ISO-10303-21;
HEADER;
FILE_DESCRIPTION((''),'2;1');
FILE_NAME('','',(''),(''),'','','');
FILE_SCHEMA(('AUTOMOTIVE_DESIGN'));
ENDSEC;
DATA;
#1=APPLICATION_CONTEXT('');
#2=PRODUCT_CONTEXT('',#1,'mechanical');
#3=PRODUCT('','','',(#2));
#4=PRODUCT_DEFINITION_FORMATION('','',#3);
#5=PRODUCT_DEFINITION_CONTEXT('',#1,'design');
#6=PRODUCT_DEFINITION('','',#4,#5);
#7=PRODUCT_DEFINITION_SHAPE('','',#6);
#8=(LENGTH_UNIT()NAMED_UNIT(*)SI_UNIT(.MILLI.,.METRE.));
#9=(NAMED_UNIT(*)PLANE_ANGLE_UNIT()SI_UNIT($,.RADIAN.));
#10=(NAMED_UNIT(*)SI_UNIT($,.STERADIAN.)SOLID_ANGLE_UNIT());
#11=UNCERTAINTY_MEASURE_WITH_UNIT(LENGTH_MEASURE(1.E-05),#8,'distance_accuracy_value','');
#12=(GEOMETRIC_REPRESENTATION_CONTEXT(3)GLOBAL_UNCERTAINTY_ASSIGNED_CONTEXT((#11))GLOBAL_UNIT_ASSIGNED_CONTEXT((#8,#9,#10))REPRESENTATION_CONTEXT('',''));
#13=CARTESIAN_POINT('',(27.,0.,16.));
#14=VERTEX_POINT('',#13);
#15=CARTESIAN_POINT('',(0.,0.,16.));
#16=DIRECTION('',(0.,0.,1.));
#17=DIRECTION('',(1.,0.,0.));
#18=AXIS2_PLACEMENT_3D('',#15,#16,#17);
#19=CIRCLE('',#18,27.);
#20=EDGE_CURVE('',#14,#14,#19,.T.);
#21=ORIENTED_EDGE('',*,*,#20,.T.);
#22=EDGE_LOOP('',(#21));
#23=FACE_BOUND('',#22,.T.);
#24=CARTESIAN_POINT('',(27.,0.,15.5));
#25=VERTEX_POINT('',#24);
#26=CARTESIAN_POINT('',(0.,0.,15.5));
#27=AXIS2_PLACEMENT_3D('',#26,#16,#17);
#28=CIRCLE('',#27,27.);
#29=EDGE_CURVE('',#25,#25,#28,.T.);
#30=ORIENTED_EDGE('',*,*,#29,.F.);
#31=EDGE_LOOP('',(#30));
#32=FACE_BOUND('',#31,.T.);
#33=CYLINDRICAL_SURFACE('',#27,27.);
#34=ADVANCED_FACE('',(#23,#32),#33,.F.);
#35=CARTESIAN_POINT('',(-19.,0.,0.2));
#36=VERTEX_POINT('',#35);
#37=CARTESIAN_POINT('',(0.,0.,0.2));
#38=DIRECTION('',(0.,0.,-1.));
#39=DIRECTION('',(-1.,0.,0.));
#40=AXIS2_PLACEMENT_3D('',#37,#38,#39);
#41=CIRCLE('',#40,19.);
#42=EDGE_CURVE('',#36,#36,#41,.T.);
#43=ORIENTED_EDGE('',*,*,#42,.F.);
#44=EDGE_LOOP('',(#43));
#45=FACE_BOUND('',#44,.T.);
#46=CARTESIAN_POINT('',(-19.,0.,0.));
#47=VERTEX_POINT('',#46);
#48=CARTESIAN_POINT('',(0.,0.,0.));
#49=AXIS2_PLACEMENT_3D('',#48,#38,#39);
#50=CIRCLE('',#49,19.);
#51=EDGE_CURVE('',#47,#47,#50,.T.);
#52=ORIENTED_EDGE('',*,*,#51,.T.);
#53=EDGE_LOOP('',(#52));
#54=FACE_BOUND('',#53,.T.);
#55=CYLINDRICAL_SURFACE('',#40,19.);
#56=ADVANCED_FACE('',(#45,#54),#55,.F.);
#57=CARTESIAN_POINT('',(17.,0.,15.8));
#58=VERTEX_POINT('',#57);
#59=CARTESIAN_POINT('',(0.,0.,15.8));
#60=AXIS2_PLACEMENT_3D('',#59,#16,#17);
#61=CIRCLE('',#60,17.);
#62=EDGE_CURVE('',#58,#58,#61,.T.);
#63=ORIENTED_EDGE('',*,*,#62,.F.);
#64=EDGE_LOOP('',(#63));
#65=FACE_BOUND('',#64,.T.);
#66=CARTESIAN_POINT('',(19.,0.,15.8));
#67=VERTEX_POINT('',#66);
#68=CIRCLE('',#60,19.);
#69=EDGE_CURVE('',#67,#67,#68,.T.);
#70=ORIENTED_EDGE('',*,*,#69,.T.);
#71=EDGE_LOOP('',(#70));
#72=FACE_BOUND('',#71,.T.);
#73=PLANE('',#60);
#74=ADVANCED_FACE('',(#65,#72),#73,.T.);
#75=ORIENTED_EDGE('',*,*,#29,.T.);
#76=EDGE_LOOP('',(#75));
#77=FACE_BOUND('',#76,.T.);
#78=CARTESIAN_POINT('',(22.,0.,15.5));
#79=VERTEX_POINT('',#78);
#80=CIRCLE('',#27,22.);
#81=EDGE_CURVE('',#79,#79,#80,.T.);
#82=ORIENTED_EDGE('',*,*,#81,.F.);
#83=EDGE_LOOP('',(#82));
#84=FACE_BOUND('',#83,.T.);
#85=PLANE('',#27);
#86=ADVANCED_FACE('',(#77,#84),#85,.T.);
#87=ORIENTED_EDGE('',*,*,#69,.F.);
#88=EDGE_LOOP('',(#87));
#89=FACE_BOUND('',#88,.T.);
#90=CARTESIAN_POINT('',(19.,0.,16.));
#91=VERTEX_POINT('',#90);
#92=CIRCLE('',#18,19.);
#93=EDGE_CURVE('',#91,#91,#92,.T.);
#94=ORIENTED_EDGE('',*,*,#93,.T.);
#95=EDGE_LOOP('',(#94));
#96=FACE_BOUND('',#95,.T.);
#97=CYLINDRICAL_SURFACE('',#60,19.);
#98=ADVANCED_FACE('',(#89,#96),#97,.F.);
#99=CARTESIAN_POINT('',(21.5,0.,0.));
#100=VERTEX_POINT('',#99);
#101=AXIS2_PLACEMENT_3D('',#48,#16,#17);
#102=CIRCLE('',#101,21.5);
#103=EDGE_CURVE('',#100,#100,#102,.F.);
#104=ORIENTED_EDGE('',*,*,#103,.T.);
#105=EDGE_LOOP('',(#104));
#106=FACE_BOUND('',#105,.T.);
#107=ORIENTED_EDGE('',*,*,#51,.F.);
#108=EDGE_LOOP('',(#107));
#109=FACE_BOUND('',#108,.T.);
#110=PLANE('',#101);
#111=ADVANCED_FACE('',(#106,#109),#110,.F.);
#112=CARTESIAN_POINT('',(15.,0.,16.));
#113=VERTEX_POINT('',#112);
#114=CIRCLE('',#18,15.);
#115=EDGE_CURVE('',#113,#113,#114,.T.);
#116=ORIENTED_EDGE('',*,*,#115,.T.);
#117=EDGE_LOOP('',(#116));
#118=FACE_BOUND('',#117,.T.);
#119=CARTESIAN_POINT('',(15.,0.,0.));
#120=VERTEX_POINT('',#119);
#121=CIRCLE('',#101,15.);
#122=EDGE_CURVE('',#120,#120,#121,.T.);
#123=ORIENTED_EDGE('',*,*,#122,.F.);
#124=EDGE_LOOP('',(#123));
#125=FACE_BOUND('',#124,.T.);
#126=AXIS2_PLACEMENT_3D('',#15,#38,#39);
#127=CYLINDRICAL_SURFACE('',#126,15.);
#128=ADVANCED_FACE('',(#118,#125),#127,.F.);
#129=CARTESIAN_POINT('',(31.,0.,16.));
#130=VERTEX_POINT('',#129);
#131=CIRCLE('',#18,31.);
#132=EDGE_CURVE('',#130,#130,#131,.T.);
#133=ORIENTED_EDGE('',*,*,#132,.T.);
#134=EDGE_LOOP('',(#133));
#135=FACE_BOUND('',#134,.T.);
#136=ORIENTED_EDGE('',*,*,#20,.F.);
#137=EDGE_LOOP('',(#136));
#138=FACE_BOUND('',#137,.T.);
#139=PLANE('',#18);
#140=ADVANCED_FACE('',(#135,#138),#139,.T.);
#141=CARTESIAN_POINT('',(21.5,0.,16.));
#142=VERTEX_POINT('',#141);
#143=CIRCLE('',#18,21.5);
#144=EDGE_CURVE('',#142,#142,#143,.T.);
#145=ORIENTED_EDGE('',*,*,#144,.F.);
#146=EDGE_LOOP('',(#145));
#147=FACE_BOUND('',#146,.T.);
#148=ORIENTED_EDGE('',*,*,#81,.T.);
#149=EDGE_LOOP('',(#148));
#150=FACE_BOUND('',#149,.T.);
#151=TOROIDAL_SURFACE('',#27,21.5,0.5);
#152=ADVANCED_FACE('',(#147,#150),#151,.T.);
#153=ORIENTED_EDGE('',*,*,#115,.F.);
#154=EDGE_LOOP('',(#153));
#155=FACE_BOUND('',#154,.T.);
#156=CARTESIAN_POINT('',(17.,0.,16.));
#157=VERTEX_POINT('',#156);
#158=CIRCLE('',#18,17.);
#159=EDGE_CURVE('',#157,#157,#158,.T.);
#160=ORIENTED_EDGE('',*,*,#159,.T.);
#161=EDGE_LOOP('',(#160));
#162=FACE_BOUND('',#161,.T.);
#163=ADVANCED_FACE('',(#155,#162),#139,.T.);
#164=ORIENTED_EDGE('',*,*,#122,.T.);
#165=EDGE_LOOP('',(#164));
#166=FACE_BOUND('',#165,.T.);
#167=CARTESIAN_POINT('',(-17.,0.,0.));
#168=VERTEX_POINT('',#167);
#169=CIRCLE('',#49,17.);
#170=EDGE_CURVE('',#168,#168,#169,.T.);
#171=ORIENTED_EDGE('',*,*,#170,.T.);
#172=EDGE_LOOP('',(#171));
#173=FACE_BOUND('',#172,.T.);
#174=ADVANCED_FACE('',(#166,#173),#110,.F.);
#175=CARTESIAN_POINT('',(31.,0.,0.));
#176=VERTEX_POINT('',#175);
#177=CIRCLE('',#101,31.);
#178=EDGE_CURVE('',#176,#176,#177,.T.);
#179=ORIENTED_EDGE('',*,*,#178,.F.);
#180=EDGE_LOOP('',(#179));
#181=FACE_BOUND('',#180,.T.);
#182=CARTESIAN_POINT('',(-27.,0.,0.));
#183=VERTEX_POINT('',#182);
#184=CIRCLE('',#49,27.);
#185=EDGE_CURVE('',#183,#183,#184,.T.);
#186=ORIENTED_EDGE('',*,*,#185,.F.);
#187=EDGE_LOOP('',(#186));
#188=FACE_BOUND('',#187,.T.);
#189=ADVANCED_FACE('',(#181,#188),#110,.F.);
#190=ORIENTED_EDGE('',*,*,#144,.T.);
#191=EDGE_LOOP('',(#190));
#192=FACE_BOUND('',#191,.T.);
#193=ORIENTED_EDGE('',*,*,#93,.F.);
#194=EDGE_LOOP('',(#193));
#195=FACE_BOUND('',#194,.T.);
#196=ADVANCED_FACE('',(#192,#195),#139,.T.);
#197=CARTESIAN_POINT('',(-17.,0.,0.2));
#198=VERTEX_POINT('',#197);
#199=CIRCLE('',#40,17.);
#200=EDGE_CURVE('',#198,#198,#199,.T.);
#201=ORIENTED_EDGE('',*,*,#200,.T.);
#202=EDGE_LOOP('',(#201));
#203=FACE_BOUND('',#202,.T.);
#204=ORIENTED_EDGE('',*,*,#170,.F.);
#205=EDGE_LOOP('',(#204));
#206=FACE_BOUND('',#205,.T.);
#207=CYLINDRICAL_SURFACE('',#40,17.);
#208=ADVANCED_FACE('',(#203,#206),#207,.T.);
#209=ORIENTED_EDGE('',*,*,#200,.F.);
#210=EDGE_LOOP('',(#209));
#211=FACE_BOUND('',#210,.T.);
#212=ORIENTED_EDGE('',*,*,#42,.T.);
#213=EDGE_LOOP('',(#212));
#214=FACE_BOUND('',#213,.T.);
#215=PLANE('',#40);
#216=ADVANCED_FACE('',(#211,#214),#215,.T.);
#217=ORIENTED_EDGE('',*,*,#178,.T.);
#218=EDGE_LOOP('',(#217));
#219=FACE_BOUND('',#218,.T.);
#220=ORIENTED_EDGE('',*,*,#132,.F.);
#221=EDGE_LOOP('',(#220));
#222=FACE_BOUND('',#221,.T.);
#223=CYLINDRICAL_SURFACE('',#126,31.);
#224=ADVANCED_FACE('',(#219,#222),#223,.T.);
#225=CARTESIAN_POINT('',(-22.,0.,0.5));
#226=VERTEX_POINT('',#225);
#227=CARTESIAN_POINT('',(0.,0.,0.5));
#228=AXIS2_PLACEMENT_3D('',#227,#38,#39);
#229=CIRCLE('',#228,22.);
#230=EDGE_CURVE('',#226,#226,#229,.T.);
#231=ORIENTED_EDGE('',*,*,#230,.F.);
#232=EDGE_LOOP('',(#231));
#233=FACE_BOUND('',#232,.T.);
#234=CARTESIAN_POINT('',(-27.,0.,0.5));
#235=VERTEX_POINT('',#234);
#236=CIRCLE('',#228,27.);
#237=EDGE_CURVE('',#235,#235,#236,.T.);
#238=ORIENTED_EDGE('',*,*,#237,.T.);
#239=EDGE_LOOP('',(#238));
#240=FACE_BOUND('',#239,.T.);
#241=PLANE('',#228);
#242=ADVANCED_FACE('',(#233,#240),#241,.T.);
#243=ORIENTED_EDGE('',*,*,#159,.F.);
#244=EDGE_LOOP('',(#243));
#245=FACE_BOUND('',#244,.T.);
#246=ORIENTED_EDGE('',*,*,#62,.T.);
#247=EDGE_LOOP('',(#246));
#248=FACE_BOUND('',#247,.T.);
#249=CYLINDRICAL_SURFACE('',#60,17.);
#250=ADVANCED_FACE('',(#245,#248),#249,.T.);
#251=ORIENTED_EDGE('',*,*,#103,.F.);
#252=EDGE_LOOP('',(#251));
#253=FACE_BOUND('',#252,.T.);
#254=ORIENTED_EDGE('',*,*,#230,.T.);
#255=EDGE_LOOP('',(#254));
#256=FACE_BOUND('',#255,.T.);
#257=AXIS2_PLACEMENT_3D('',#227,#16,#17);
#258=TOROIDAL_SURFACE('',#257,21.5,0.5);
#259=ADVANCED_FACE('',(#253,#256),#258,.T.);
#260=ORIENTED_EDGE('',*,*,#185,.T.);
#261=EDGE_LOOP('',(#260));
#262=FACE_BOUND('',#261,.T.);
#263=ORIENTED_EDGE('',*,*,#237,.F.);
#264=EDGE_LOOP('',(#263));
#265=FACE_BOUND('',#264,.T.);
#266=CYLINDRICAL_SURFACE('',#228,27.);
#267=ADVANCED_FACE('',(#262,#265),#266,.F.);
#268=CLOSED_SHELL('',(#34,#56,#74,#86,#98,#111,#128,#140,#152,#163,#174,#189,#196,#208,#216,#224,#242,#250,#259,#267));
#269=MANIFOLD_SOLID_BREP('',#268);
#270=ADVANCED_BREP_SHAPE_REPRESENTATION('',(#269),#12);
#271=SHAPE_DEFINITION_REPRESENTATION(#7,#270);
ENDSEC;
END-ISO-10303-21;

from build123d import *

# Parameters (mm, degrees)
SKETCH_1_R          = 31
SKETCH_1_R_2        = 15
EXTRUDE_1_DEPTH     = 16
SKETCH_2_R          = 27
SKETCH_2_R_2        = 22
CUT_EXTRUDE_1_DEPTH = 0.5
CUT_EXTRUDE_START   = -0.5
SKETCH_3_R          = 27
SKETCH_3_R_2        = 22
CUT_EXTRUDE_2_DEPTH = 0.5
SKETCH_4_R          = 19
SKETCH_4_R_2        = 17
CUT_EXTRUDE_3_DEPTH = 0.2
FILLET_1_R          = 0.5
CUT_EXTRUDE_START_2 = -0.2
SKETCH_5_R          = 19
SKETCH_5_R_2        = 17
CUT_EXTRUDE_4_DEPTH = 0.2


with BuildPart() as part:
    # 草图1 → 凸台-拉伸1 (new body)
    with BuildSketch(Plane.XY):
        Circle(SKETCH_1_R)
        Circle(SKETCH_1_R_2, mode=Mode.SUBTRACT)
    extrude(amount=EXTRUDE_1_DEPTH)

    # 草图2 → 切除-拉伸1 (cut)
    with BuildSketch(Plane.XY.offset(16)):
        Circle(SKETCH_2_R)
        Circle(SKETCH_2_R_2, mode=Mode.SUBTRACT)
    extrude(amount=-CUT_EXTRUDE_1_DEPTH, mode=Mode.SUBTRACT)

    # 草图3 → 切除-拉伸2 (cut)
    with BuildSketch(Plane(origin=(0, 0, 0), x_dir=(-1, 0, 0), z_dir=(0, 0, -1)).offset(CUT_EXTRUDE_START)):
        with Locations(Location((0, 0, 0), (0, 0, 180))):
            Circle(SKETCH_3_R)
        with Locations(Location((0, 0, 0), (0, 0, 180))):
            Circle(SKETCH_3_R_2, mode=Mode.SUBTRACT)
    extrude(amount=CUT_EXTRUDE_2_DEPTH, mode=Mode.SUBTRACT)

    # 草图4 → 切除-拉伸3 (cut)
    with BuildSketch(Plane.XY.offset(16)):
        Circle(SKETCH_4_R)
        Circle(SKETCH_4_R_2, mode=Mode.SUBTRACT)
    extrude(amount=-CUT_EXTRUDE_3_DEPTH, mode=Mode.SUBTRACT)

    # 圆角1
    fillet_1_edges = [part.edges().sort_by_distance(p)[0] for p in [
        (-22, 0, 16),
        (-22, 0, 0),
    ]]
    fillet(fillet_1_edges, radius=FILLET_1_R - 0.0001)  # a hair under: the kernel refuses the full size

    # 草图5 → 切除-拉伸4 (cut)
    with BuildSketch(Plane(origin=(0, 0, 0), x_dir=(-1, 0, 0), z_dir=(0, 0, -1)).offset(CUT_EXTRUDE_START_2)):
        with Locations(Location((0, 0, 0), (0, 0, 180))):
            Circle(SKETCH_5_R)
        with Locations(Location((0, 0, 0), (0, 0, 180))):
            Circle(SKETCH_5_R_2, mode=Mode.SUBTRACT)
    extrude(amount=CUT_EXTRUDE_4_DEPTH, mode=Mode.SUBTRACT)


solid = part.part
